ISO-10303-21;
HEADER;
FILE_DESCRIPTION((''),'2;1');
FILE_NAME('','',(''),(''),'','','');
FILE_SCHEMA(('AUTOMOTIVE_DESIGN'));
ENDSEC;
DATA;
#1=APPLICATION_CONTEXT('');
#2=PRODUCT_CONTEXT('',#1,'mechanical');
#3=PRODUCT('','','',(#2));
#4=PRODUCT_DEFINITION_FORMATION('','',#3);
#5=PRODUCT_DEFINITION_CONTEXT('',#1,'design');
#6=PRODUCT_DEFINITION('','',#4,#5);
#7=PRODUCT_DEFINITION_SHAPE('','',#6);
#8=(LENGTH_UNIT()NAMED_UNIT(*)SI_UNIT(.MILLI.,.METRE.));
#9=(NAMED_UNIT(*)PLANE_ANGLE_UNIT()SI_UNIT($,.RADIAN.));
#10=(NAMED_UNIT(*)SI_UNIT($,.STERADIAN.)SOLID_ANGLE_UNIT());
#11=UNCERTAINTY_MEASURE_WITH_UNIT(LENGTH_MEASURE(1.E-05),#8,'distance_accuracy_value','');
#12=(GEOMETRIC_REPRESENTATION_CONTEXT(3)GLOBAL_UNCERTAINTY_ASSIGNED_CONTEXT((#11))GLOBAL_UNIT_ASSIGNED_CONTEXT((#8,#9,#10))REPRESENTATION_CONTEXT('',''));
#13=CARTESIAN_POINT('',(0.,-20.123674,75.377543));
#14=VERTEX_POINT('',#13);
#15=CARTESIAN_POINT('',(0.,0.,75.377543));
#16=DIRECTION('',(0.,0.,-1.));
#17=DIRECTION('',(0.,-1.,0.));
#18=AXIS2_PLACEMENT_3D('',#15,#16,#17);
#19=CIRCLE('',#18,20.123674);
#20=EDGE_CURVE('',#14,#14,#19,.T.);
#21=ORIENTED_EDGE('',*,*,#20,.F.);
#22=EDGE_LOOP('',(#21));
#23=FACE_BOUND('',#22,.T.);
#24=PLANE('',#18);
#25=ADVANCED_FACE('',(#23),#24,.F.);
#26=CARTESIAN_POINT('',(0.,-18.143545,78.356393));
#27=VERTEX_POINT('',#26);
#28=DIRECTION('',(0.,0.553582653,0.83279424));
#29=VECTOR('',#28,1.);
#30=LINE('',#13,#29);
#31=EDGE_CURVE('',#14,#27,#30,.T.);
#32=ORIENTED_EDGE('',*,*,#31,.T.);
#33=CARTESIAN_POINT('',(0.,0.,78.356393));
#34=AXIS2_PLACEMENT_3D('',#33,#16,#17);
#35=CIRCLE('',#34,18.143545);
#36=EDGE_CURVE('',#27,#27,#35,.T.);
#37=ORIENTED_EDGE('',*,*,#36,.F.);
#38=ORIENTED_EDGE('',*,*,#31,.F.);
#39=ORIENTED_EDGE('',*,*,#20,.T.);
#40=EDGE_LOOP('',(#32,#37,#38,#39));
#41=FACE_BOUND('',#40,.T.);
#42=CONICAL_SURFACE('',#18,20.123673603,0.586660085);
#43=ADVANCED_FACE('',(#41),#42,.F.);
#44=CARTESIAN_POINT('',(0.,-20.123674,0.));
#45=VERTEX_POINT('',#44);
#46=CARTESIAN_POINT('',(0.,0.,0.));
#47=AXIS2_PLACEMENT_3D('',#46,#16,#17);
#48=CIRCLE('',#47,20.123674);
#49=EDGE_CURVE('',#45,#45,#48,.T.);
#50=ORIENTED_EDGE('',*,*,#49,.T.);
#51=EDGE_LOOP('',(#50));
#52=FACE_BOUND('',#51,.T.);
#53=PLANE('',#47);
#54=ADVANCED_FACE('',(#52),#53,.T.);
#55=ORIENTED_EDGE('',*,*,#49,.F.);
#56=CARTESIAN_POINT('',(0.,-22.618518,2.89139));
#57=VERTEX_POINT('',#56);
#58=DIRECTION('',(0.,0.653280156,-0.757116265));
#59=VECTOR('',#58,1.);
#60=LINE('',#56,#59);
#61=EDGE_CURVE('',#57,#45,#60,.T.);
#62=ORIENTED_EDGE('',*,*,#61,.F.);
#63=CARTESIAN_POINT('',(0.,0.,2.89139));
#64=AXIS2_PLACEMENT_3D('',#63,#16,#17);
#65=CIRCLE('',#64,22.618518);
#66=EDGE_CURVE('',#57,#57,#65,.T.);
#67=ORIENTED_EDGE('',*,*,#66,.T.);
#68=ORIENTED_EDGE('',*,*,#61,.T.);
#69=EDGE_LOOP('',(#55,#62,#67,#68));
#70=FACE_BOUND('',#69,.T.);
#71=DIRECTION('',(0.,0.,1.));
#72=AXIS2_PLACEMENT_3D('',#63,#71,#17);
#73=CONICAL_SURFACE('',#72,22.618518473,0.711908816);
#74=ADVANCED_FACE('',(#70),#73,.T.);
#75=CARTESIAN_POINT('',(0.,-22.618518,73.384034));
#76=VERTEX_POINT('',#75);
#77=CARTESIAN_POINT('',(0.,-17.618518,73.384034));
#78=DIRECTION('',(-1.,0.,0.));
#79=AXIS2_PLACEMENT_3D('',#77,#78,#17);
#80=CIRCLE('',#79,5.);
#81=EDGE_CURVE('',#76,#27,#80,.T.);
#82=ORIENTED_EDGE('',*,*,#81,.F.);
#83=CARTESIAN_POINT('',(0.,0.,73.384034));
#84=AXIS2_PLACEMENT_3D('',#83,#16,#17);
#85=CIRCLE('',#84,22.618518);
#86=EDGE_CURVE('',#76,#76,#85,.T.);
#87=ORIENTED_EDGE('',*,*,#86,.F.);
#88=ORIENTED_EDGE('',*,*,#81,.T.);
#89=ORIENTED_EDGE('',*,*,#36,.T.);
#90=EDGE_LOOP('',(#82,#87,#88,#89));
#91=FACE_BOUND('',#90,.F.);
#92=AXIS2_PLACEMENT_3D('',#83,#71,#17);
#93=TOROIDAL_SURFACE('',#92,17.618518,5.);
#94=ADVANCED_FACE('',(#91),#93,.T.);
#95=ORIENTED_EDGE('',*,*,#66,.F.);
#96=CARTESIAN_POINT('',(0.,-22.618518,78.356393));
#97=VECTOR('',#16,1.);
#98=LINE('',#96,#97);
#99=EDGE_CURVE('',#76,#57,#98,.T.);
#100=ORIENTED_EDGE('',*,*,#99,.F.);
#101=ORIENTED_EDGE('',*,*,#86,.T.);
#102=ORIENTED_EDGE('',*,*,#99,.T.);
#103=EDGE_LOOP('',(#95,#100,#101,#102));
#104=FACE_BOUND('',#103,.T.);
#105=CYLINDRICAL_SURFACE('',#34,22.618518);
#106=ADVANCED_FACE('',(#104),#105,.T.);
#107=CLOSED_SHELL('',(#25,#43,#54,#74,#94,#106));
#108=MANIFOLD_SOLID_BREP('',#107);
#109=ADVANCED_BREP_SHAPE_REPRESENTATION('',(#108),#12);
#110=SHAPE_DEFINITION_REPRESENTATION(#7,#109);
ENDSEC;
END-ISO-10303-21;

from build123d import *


# Not quite as in the source:
# - a fillet or chamfer that OpenCascade refuses, or shapes differently, is made with other operations: its cross-section is extruded or revolved along the edge and cut away or added


with BuildPart() as f1:
    # F0 (on Right) → F1 (revolve)
    with BuildSketch(Plane.YZ):
        Polygon((-20.1236736029, 0), (0, 0), (0, 75.3775425255), (-20.1236736029, 75.3775425255), (-18.1435449049, 78.3563926816), (-22.6185184726, 78.3563926816), (-22.6185184726, 2.8913898758), align=None)
    revolve(axis=Axis((0, 0, 37.6887712628), (0, 0, -1)))

    # F2: fillet of radius 5 on 1 edges, made by hand

    # F2_s1 → F2_t2 (revolve, cut)
    with BuildSketch(Plane.YZ):
        with BuildLine():
            ThreePointArc((-22.6185184726, 73.3840343633), (-21.3350445495, 76.7287965251), (-18.1435449049, 78.3563926816))
            Line((-18.1435449049, 78.3563926816), (-22.6185184726, 78.3563926816))
            Line((-22.6185184726, 78.3563926816), (-22.6185184726, 73.3840343633))
        make_face()
    revolve(axis=Axis((0, 0, 78.3563926816), (0, 0, -1)), mode=Mode.SUBTRACT)


solid = f1.part
